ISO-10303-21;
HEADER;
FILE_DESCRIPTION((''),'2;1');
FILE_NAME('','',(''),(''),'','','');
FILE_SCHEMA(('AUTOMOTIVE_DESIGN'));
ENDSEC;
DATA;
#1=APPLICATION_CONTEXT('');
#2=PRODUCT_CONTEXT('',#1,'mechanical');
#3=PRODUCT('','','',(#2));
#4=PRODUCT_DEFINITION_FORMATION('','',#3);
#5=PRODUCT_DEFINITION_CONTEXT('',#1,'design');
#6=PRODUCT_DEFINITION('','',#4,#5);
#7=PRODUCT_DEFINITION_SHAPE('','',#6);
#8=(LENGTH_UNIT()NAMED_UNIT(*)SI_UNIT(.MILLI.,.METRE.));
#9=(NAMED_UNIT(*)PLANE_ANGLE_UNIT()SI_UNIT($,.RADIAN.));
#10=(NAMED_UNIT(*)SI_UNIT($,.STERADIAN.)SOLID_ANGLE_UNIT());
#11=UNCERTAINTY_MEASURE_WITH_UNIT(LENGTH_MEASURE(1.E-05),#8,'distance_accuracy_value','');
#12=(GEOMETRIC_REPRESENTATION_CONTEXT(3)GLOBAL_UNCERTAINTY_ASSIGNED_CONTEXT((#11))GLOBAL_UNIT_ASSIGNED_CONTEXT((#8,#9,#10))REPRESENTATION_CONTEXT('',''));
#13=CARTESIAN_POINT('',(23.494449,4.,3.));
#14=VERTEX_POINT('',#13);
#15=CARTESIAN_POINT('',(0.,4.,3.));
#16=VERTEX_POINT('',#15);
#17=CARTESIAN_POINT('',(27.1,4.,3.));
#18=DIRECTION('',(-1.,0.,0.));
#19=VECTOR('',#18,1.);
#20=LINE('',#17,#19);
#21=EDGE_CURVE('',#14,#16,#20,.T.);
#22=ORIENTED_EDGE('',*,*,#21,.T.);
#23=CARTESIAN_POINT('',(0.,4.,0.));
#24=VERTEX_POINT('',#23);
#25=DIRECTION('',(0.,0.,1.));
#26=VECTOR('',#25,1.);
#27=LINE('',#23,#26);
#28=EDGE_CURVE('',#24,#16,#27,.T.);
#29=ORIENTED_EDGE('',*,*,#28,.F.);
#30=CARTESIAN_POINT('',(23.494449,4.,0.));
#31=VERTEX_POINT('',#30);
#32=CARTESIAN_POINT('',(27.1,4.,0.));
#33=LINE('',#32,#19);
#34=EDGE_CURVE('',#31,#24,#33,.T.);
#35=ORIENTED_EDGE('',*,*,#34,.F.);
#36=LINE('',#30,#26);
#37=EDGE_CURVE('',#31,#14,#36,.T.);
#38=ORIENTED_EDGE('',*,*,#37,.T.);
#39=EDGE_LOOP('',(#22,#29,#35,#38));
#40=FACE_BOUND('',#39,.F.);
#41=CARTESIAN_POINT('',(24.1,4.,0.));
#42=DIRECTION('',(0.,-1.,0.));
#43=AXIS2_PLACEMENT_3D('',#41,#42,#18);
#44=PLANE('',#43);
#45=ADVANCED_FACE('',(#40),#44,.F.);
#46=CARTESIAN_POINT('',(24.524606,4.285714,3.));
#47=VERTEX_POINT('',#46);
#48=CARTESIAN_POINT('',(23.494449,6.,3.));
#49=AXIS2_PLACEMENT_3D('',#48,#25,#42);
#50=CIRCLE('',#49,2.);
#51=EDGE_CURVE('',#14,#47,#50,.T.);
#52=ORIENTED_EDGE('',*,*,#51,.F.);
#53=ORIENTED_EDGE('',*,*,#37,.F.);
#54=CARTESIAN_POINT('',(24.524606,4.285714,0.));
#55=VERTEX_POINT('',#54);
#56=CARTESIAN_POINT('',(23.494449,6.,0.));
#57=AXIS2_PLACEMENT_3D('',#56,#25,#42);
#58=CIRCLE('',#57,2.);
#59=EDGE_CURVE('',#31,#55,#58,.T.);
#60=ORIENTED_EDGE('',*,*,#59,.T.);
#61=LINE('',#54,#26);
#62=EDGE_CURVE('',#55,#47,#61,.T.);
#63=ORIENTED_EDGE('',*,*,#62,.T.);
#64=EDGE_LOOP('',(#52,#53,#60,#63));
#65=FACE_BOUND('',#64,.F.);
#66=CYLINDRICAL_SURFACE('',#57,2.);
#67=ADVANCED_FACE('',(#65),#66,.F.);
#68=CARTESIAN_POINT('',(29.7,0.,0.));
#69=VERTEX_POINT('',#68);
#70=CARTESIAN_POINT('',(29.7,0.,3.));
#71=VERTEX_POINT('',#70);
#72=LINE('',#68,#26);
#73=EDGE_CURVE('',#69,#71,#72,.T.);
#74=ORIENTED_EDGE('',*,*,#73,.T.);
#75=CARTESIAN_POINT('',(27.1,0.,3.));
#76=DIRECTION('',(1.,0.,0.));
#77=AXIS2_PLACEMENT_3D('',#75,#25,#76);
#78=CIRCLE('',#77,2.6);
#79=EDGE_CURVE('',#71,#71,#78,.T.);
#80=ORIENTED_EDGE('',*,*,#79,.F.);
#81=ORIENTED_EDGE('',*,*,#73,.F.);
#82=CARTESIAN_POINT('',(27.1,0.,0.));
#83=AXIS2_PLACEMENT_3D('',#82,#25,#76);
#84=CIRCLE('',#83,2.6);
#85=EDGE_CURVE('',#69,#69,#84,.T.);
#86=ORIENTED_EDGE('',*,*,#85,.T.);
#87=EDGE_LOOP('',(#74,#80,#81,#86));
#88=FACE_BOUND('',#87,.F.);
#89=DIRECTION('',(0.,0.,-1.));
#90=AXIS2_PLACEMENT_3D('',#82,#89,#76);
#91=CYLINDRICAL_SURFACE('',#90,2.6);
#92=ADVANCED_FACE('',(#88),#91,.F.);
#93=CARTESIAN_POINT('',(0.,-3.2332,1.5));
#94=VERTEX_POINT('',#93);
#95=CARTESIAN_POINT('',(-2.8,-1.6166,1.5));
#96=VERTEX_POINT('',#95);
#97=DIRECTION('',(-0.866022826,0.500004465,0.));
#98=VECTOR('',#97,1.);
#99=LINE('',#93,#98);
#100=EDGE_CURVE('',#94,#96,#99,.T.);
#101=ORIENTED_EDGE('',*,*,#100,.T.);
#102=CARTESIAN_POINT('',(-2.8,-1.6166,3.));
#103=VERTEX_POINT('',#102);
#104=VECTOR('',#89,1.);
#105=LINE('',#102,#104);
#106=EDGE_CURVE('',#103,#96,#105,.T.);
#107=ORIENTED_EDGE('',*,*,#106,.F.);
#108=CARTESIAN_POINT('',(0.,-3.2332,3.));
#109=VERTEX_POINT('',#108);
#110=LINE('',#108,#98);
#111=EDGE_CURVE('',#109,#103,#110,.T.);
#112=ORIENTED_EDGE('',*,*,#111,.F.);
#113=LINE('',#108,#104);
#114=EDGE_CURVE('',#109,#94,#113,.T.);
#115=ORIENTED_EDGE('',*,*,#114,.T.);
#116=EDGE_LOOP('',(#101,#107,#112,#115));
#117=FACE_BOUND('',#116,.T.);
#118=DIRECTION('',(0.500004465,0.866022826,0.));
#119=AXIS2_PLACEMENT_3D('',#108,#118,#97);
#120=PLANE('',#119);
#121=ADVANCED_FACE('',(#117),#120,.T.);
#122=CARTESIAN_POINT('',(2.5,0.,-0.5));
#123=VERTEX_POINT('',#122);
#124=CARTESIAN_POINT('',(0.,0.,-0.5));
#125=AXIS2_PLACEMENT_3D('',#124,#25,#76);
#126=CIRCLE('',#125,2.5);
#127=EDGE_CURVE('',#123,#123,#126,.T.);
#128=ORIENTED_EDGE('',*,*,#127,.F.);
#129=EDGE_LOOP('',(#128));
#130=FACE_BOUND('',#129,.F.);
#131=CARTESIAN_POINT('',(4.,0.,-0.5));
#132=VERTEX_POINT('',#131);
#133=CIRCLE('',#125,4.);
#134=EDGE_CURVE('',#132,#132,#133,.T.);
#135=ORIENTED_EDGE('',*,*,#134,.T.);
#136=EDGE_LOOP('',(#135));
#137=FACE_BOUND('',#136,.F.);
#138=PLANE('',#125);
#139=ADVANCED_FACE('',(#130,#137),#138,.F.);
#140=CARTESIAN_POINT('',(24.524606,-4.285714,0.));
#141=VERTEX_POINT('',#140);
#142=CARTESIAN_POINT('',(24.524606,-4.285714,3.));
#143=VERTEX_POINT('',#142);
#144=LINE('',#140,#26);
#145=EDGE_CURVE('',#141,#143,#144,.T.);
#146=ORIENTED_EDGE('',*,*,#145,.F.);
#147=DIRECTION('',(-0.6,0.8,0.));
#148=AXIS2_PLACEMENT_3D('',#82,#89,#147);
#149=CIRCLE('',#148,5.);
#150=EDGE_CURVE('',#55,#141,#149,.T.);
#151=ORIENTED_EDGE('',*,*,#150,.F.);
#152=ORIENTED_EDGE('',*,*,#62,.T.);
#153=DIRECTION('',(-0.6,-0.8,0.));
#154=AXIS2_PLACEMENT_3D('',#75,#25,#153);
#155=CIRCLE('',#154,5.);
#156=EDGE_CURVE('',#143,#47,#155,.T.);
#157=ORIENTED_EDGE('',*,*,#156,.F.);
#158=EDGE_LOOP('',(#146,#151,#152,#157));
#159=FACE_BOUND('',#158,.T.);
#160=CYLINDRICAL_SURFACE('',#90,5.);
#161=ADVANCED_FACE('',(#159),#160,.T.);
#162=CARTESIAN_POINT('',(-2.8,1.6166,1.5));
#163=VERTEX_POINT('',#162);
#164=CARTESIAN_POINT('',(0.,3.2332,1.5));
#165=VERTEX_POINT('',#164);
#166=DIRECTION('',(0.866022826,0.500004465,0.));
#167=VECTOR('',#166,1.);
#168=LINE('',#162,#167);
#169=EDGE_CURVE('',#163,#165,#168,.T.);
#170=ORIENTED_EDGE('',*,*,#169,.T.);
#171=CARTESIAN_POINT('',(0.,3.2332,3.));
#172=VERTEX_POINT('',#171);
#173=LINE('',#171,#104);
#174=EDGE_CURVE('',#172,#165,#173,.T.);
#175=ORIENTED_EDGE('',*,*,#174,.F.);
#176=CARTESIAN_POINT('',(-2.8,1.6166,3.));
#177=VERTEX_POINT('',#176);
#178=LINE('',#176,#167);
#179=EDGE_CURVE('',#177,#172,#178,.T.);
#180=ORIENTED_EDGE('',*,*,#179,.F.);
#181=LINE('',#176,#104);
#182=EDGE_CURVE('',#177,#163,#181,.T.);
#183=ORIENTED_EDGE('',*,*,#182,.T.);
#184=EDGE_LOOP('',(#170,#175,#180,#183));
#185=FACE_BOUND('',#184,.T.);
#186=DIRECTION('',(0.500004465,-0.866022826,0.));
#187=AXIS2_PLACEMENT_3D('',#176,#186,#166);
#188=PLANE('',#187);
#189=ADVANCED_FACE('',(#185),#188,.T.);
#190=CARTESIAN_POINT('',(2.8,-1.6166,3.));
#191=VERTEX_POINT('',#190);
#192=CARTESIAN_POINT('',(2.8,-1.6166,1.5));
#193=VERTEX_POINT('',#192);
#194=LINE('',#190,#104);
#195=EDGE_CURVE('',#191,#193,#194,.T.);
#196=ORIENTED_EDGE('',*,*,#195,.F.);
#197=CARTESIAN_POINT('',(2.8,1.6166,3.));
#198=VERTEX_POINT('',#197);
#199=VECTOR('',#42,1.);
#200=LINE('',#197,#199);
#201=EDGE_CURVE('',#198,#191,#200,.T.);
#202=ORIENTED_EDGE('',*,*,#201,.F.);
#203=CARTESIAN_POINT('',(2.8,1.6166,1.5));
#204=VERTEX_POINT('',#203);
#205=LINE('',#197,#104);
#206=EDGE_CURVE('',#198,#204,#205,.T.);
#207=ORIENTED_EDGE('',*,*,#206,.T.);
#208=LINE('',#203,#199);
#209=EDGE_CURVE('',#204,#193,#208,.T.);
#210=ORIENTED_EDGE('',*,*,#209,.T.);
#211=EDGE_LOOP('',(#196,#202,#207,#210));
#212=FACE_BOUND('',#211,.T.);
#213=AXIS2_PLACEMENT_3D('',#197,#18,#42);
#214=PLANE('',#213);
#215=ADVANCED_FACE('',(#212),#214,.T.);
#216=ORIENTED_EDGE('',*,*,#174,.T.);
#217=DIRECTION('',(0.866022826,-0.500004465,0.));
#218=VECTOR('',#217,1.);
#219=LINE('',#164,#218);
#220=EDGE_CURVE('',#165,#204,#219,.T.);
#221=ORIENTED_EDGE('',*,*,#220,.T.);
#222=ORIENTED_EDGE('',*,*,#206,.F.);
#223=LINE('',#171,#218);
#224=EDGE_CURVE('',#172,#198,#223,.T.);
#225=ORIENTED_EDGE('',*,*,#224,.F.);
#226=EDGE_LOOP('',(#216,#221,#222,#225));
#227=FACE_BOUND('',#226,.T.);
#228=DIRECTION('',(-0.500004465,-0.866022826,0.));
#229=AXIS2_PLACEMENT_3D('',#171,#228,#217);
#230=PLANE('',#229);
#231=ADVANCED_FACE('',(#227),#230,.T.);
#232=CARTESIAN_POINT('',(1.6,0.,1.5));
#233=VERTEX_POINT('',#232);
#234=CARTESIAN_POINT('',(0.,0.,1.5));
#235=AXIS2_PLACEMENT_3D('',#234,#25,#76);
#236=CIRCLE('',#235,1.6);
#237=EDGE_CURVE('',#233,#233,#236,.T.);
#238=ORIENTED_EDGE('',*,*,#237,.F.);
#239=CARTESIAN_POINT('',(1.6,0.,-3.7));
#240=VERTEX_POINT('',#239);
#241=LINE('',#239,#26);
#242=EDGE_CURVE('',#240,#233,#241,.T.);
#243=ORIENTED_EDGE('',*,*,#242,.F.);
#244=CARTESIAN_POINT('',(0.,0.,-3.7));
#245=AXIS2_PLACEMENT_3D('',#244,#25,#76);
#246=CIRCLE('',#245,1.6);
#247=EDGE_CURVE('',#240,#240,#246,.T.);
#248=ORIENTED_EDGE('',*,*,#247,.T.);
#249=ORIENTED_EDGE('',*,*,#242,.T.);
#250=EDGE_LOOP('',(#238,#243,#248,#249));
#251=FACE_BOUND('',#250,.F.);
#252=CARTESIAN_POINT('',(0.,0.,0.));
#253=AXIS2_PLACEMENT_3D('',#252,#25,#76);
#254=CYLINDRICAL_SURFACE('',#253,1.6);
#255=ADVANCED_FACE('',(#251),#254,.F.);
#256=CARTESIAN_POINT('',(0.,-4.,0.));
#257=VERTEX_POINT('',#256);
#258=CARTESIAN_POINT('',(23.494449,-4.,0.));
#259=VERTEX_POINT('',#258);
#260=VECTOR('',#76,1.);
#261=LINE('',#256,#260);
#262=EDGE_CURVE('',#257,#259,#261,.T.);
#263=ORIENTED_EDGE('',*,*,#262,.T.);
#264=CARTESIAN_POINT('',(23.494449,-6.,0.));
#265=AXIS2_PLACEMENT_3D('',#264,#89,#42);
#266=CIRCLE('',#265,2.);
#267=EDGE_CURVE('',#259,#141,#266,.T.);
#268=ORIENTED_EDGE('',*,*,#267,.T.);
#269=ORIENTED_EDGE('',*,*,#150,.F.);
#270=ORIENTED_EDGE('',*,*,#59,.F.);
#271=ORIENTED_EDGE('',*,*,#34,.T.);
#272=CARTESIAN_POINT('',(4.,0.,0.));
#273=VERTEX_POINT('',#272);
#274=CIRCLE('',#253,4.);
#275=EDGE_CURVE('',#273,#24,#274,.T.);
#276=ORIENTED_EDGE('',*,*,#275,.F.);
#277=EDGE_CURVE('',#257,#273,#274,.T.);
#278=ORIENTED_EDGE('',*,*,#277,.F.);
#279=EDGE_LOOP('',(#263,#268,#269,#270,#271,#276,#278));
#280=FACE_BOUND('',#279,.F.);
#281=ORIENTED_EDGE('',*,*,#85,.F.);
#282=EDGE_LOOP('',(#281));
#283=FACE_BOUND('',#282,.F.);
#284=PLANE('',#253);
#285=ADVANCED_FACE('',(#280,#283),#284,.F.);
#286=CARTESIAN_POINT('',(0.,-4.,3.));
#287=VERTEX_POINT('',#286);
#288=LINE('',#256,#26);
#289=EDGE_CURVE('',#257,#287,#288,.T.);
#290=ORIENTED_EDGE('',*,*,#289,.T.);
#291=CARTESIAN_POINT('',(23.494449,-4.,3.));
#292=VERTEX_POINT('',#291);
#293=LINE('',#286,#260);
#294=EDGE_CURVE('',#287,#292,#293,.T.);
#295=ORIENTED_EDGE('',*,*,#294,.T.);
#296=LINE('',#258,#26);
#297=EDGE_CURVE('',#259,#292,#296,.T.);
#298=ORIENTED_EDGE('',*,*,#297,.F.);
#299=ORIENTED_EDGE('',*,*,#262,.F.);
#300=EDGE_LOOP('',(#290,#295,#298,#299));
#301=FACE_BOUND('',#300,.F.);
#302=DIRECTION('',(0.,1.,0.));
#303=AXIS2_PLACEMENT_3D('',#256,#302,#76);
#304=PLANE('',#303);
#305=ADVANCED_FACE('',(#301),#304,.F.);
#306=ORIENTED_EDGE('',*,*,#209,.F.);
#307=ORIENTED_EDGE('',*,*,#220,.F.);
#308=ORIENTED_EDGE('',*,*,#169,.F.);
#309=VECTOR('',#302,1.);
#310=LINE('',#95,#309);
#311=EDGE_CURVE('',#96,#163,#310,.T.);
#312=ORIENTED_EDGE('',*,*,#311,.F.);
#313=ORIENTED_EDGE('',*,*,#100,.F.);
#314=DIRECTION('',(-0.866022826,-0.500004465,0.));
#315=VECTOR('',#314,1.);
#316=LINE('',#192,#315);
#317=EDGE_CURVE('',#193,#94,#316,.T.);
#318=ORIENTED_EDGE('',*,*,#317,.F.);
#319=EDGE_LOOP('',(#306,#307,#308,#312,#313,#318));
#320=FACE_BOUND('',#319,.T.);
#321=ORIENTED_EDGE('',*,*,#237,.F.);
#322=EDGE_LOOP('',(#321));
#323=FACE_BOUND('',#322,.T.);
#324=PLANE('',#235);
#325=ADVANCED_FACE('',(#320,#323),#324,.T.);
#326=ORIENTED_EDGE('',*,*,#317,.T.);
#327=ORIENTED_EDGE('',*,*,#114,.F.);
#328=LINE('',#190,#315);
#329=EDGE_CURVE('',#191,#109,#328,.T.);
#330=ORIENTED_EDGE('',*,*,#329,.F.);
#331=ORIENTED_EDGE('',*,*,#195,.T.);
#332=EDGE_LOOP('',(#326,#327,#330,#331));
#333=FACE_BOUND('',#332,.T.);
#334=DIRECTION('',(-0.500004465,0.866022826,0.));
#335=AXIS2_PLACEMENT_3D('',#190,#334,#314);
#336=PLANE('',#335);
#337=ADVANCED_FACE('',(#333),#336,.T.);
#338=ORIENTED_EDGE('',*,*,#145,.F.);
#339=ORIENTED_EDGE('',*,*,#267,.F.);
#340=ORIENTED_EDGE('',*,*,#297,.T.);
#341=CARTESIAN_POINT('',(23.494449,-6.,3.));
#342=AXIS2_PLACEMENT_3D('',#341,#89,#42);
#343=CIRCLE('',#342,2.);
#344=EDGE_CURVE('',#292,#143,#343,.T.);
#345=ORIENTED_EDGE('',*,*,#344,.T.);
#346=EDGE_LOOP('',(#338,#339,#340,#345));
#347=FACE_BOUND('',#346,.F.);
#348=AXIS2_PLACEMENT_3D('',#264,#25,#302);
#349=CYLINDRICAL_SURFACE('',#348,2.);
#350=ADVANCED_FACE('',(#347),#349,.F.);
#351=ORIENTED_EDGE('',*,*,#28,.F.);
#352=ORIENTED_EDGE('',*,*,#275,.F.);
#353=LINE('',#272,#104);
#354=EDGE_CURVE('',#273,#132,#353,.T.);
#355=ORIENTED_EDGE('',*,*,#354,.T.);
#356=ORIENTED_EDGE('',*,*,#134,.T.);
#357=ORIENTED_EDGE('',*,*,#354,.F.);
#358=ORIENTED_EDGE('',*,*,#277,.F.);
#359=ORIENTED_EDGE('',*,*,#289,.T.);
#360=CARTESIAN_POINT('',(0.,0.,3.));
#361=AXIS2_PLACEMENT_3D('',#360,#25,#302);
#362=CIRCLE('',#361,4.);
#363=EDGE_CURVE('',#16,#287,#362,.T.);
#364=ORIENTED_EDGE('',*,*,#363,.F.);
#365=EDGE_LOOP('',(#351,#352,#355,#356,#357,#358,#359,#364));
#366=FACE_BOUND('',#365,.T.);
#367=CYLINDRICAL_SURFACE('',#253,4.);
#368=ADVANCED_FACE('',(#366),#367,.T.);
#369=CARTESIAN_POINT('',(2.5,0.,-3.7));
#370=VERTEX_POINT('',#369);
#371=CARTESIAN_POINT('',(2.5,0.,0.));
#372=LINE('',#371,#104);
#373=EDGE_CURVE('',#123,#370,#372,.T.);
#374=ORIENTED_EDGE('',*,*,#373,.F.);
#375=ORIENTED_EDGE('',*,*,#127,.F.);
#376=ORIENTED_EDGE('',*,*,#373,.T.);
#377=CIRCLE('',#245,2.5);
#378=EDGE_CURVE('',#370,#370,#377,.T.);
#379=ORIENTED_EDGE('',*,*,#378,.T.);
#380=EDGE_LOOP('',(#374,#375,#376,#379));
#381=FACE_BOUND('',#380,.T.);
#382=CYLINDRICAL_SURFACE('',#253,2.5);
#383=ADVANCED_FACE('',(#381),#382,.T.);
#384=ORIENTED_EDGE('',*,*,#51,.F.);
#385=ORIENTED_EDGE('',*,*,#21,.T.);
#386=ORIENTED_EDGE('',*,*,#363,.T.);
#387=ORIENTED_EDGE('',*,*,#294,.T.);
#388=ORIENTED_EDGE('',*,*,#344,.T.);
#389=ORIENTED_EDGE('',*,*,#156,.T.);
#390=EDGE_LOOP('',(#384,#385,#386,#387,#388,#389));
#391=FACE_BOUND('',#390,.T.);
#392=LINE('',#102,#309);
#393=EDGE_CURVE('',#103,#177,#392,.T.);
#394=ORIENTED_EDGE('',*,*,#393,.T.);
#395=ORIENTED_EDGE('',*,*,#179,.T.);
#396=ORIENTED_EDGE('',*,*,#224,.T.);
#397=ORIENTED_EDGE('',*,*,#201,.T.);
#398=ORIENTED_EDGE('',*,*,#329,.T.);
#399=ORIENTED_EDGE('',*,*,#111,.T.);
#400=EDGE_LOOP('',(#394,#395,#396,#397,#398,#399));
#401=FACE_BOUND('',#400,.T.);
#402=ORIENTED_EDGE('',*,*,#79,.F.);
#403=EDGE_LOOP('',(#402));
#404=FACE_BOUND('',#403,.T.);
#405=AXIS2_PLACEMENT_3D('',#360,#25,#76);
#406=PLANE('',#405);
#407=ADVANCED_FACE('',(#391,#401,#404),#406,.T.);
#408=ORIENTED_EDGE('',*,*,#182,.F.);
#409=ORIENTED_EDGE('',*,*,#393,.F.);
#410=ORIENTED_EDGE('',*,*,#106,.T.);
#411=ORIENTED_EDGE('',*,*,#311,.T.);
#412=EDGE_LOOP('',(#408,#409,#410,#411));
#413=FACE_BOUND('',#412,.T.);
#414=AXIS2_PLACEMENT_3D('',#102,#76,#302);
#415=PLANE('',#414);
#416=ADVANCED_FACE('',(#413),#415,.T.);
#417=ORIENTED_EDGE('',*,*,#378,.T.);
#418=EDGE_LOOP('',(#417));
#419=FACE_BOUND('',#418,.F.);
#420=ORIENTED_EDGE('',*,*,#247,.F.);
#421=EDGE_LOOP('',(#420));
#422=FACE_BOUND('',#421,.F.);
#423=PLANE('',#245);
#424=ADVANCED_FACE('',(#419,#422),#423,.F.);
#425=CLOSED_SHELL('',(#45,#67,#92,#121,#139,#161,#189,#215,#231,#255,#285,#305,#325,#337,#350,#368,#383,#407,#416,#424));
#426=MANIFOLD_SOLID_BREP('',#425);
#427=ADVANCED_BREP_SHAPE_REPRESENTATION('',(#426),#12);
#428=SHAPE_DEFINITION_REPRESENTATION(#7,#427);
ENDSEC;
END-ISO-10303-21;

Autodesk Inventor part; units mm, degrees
ref_plane "YZ Plane" through (0, 0, 0) normal (1, 0, 0) x (0, 1, 0)
ref_plane "XZ Plane" through (0, 0, 0) normal (0, 1, 0) x (-1, 0, 0)
ref_plane "XY Plane" through (0, 0, 0) normal (0, 0, 1) x (1, 0, 0)
sketch "スケッチ1" plane through (0, 0, 0) normal (0, 0, 1) x (1, 0, 0)
  line L0 (0, 0) -> (27.1, 0) construction
  line L1 (0, -4) -> (27.1, -4)
  line L2 (27.1, 4) -> (0, 4)
  arc A0 (0, 4) -> (0, -4) centre (0, 0) ccw
  arc A1 (27.1, -4) -> (27.1, 4) centre (27.1, 0) ccw
  circle A2 centre (0, 0) radius 1.6
  circle A3 centre (27.1, 0) radius 2.6
  circle A4 centre (27.1, 0) radius 5
  point P0 (13.55, 0)
  dimension "d0" = 27.1
  dimension "d1" = 4
  dimension "d2" = 3.2
  dimension "d3" = 5.2
  dimension "d6" = 10
extrude "押し出し1" add sketch "スケッチ1" along normal blind 3
sketch "スケッチ3" plane through (0, 0, 0) normal (0, 0, 1) x (1, 0, 0)
  circle A0 centre (0, 0) radius 4
  circle A1 centre (0, 0) radius 1.6
  dimension "d7" = 8
  dimension "d10" = 3.2
extrude "押し出し2" add sketch "スケッチ3" against normal blind 0.5
sketch "スケッチ4" plane through (0, 0, 0) normal (0, 0, 1) x (1, 0, 0)
  circle A0 centre (0, 0) radius 1.6
  circle A1 centre (0, 0) radius 2.5
  dimension "d11" = 5
  dimension "d12" = 3.2
extrude "押し出し3" add sketch "スケッチ4" against normal blind 3.7
sketch "スケッチ5" plane through (0, 0, 3) normal (0, 0, 1) x (1, 0, 0)
  circle A0 centre (0, 0) radius 1.6 projected
  arc A1 (0, 4) -> (0, -4) centre (0, 0) ccw projected
  line L0 (0, 3.2332) -> (2.8, 1.6166)
  line L1 (2.8, 1.6166) -> (2.8, -1.6166)
  line L2 (2.8, -1.6166) -> (0, -3.2332)
  line L3 (0, -3.2332) -> (-2.8, -1.6166)
  line L4 (-2.8, -1.6166) -> (-2.8, 1.6166)
  line L5 (-2.8, 1.6166) -> (0, 3.2332)
  dimension "d15" = 5.6
extrude "押し出し4" cut sketch "スケッチ5" against normal blind 1.5
fillet "フィレット1" radius 2 2 edges at (24.1, 4, 1.5) (24.1, -4, 1.5)
properties part number "link_long"
